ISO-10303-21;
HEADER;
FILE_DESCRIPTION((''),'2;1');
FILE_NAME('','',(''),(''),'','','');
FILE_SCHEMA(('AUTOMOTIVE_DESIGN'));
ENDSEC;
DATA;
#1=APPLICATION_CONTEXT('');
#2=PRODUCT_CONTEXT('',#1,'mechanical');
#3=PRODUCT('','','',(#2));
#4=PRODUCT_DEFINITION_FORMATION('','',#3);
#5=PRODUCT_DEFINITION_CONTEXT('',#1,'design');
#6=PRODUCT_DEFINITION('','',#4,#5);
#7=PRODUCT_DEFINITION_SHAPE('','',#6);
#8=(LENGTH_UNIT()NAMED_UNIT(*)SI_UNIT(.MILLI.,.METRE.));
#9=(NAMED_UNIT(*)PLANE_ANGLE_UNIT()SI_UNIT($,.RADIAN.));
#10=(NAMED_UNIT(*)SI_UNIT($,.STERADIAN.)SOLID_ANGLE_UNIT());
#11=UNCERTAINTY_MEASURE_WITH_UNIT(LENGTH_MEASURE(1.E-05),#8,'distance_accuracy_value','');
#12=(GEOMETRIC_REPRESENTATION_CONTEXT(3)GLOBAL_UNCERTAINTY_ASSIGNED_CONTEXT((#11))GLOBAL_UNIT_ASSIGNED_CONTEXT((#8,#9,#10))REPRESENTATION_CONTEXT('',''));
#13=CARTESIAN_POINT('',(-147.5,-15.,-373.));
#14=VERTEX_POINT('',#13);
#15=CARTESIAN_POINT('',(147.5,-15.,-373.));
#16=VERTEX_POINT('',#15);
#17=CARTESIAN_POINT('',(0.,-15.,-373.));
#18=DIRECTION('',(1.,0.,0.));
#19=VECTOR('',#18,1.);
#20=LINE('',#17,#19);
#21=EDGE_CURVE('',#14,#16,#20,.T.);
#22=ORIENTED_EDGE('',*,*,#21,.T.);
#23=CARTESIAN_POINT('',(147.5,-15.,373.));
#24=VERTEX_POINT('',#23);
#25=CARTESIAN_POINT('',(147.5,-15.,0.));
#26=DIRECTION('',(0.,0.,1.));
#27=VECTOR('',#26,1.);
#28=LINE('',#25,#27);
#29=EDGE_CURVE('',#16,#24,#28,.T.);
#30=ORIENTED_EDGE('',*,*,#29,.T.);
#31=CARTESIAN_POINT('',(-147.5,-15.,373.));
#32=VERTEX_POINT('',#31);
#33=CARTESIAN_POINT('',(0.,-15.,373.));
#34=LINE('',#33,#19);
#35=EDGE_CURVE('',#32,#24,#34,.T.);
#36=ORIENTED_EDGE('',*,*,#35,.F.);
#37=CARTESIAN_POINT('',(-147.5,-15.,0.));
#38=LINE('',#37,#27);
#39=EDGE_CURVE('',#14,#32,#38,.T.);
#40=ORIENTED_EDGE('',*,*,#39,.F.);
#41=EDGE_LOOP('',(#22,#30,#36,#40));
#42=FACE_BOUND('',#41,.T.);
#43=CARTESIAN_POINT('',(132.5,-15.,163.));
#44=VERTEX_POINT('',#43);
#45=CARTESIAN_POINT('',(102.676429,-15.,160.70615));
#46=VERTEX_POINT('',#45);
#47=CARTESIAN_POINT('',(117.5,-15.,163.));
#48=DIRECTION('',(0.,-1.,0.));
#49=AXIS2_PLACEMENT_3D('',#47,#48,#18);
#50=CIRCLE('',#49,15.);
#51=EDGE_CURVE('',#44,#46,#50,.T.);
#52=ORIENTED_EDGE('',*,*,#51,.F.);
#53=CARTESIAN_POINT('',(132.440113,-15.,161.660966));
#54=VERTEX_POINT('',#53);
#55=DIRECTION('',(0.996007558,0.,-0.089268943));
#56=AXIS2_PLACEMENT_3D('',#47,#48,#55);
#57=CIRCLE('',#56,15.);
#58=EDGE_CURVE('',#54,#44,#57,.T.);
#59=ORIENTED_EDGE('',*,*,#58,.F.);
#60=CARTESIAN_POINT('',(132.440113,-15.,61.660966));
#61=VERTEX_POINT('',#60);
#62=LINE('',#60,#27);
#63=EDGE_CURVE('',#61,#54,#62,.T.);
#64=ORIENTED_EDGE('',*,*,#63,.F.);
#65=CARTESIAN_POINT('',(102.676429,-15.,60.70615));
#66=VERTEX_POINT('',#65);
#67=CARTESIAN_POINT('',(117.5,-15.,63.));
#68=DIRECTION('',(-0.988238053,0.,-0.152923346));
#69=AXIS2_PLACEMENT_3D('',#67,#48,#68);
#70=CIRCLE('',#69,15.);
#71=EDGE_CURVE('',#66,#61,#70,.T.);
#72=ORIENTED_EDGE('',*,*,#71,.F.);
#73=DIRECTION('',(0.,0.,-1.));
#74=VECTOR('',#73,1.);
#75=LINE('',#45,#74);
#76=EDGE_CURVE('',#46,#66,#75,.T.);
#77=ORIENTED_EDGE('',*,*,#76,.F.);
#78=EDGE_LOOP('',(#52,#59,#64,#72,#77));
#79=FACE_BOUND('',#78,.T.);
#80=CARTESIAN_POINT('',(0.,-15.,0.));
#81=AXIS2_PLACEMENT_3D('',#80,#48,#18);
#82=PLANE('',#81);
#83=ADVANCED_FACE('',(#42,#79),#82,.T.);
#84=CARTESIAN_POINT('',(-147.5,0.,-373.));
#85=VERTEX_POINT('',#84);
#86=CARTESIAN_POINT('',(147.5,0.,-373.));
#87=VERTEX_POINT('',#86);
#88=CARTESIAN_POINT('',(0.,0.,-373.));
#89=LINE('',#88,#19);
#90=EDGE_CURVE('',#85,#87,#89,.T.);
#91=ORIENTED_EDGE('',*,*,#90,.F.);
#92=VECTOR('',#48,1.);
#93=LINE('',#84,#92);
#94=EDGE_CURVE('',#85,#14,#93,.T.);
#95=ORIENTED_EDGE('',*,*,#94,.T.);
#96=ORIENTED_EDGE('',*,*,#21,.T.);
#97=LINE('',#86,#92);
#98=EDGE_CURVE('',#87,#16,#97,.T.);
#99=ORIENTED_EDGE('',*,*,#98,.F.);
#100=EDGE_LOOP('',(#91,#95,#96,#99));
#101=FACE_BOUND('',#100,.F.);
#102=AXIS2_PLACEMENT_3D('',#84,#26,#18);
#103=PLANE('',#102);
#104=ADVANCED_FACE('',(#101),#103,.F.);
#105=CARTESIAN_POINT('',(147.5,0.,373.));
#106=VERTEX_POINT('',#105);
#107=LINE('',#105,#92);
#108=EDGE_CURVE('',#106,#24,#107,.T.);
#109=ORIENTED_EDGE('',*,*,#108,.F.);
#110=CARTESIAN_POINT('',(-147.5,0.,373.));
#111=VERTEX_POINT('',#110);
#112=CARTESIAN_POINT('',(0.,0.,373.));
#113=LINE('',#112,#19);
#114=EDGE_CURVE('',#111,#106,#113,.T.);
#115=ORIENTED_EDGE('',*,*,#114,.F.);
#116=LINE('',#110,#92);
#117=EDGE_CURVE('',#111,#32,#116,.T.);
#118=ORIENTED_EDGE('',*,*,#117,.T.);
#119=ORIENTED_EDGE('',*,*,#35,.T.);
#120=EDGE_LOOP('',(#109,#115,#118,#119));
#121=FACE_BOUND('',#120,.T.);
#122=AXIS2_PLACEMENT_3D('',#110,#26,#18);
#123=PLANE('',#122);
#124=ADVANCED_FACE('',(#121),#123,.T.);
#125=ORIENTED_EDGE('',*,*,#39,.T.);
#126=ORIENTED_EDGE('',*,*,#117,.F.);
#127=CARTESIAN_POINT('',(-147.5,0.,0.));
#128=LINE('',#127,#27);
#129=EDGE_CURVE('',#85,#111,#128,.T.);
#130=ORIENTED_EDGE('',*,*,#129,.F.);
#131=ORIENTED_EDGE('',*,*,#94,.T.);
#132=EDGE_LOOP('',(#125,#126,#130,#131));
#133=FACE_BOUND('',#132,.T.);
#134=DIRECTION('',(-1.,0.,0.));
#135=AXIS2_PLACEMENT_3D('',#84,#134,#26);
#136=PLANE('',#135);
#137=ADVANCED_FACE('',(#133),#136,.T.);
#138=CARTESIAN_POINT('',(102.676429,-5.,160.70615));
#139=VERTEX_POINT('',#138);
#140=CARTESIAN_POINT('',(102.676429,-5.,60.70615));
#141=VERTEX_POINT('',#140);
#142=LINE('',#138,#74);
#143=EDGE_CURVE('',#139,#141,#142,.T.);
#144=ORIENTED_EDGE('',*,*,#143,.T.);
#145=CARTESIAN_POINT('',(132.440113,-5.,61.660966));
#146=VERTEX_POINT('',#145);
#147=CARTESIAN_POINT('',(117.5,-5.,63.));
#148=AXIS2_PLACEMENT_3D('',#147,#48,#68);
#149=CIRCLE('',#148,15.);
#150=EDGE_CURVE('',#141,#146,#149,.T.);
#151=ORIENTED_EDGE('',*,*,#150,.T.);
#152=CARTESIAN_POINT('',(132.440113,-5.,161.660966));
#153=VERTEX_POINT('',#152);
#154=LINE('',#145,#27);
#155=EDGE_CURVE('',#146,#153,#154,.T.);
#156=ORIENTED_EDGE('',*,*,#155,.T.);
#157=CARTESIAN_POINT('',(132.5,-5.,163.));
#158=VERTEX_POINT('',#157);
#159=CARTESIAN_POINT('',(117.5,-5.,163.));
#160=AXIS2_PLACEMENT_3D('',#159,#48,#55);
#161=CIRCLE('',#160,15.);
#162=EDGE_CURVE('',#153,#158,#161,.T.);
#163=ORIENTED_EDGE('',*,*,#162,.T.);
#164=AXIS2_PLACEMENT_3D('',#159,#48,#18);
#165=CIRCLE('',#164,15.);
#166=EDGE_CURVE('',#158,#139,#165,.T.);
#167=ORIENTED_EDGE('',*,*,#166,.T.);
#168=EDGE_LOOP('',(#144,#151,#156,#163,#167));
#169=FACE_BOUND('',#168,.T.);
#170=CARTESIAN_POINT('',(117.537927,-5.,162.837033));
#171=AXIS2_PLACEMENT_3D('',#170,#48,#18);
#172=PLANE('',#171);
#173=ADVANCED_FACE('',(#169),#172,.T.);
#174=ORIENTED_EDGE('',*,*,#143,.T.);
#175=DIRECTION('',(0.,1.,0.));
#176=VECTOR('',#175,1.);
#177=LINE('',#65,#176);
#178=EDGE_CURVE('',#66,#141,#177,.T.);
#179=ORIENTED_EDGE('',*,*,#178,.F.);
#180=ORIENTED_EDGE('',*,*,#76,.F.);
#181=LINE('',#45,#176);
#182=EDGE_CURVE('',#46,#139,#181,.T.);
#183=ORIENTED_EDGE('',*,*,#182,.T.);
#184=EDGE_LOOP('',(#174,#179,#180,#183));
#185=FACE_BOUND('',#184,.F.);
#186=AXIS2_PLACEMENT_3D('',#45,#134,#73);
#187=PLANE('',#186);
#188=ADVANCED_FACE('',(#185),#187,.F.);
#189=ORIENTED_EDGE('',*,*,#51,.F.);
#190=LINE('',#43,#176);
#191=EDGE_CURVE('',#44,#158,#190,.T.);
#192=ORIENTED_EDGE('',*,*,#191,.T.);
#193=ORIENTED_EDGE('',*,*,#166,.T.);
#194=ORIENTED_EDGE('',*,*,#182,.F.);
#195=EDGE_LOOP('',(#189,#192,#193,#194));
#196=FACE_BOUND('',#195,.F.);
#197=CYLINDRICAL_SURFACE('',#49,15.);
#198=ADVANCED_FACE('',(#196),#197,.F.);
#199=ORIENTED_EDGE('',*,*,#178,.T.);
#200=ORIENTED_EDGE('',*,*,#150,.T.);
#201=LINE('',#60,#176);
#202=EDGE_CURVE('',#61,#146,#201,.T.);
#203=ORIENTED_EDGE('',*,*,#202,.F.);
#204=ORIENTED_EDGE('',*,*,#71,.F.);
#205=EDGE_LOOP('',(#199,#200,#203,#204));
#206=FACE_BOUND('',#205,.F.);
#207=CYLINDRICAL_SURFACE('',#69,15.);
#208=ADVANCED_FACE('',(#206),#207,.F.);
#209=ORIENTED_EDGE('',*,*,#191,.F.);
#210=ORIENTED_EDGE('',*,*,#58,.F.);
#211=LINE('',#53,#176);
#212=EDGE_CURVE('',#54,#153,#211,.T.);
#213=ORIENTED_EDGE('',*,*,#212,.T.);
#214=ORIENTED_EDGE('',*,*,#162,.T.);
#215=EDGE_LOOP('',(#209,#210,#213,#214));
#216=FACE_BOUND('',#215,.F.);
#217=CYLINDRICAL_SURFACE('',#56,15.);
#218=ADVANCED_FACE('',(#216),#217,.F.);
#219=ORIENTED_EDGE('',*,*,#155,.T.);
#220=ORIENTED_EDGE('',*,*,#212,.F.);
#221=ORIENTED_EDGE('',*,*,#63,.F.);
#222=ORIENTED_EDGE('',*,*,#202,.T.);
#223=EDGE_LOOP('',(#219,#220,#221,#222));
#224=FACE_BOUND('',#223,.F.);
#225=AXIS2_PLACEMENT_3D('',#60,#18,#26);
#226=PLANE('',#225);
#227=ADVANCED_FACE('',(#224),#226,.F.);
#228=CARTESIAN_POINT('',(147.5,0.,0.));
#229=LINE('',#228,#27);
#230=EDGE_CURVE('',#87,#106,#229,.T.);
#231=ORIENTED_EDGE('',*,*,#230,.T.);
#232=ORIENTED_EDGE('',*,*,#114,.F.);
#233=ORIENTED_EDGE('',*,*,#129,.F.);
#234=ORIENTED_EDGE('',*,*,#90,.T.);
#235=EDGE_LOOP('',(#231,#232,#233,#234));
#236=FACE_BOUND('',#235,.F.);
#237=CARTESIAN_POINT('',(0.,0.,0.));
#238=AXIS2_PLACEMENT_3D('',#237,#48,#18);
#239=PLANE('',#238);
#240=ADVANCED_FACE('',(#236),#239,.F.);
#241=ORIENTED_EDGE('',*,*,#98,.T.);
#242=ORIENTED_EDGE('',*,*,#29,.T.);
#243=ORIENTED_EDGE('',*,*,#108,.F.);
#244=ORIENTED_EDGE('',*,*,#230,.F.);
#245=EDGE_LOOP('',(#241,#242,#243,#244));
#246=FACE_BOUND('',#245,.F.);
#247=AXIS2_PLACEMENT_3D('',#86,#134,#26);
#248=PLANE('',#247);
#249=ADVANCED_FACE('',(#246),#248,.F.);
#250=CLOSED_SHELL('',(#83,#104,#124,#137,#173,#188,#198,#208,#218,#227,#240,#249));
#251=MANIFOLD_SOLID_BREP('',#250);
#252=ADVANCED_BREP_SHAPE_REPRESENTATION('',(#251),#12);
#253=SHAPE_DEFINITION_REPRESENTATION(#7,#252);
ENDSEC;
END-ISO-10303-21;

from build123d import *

# Parameters (mm, degrees)
F0_W     = 295
F0_H     = 746
F1_DEPTH = 15
F3_DEPTH = 10


with BuildPart() as f1:
    # F0 (on Front) → F1 (new body)
    with BuildSketch(Plane.XZ):
        Rectangle(F0_W, F0_H)
    extrude(amount=F1_DEPTH)

    # F2 (on face) → F3 (cut)
    with BuildSketch(Plane.XZ.offset(15)):
        with BuildLine():
            ThreePointArc((132.4401133717, 161.6609658553), (132.4850208638, 162.3298136735), (132.5, 163))
            ThreePointArc((132.5, 163), (116.3496874374, 177.9558276604), (102.6764291989, 160.7061498078))
            ThreePointArc((102.6764291989, 160.7061498078), (117.9809511033, 148.0077124482), (132.4401133717, 161.6609658553))
        make_face()
        with BuildLine():
            ThreePointArc((132.4401133717, 161.6609658553), (117.9809511033, 148.0077124482), (102.6764291989, 160.7061498078))
            Line((102.6764291989, 160.7061498078), (102.6764291989, 65.2938501922))
            ThreePointArc((102.6764291989, 65.2938501922), (117.9809511033, 77.9922875518), (132.4401133717, 64.3390341447))
            Line((132.4401133717, 64.3390341447), (132.4401133717, 161.6609658553))
        make_face()
        with BuildLine():
            ThreePointArc((132.4401133717, 64.3390341447), (117.9809511033, 77.9922875518), (102.6764291989, 65.2938501922))
            Line((102.6764291989, 65.2938501922), (102.6764291989, 60.7061498078))
            ThreePointArc((102.6764291989, 60.7061498078), (117.9809511033, 48.0077124482), (132.4401133717, 61.6609658553))
            Line((132.4401133717, 61.6609658553), (132.4401133717, 64.3390341447))
        make_face()
    extrude(amount=-F3_DEPTH, mode=Mode.SUBTRACT)


solid = f1.part
